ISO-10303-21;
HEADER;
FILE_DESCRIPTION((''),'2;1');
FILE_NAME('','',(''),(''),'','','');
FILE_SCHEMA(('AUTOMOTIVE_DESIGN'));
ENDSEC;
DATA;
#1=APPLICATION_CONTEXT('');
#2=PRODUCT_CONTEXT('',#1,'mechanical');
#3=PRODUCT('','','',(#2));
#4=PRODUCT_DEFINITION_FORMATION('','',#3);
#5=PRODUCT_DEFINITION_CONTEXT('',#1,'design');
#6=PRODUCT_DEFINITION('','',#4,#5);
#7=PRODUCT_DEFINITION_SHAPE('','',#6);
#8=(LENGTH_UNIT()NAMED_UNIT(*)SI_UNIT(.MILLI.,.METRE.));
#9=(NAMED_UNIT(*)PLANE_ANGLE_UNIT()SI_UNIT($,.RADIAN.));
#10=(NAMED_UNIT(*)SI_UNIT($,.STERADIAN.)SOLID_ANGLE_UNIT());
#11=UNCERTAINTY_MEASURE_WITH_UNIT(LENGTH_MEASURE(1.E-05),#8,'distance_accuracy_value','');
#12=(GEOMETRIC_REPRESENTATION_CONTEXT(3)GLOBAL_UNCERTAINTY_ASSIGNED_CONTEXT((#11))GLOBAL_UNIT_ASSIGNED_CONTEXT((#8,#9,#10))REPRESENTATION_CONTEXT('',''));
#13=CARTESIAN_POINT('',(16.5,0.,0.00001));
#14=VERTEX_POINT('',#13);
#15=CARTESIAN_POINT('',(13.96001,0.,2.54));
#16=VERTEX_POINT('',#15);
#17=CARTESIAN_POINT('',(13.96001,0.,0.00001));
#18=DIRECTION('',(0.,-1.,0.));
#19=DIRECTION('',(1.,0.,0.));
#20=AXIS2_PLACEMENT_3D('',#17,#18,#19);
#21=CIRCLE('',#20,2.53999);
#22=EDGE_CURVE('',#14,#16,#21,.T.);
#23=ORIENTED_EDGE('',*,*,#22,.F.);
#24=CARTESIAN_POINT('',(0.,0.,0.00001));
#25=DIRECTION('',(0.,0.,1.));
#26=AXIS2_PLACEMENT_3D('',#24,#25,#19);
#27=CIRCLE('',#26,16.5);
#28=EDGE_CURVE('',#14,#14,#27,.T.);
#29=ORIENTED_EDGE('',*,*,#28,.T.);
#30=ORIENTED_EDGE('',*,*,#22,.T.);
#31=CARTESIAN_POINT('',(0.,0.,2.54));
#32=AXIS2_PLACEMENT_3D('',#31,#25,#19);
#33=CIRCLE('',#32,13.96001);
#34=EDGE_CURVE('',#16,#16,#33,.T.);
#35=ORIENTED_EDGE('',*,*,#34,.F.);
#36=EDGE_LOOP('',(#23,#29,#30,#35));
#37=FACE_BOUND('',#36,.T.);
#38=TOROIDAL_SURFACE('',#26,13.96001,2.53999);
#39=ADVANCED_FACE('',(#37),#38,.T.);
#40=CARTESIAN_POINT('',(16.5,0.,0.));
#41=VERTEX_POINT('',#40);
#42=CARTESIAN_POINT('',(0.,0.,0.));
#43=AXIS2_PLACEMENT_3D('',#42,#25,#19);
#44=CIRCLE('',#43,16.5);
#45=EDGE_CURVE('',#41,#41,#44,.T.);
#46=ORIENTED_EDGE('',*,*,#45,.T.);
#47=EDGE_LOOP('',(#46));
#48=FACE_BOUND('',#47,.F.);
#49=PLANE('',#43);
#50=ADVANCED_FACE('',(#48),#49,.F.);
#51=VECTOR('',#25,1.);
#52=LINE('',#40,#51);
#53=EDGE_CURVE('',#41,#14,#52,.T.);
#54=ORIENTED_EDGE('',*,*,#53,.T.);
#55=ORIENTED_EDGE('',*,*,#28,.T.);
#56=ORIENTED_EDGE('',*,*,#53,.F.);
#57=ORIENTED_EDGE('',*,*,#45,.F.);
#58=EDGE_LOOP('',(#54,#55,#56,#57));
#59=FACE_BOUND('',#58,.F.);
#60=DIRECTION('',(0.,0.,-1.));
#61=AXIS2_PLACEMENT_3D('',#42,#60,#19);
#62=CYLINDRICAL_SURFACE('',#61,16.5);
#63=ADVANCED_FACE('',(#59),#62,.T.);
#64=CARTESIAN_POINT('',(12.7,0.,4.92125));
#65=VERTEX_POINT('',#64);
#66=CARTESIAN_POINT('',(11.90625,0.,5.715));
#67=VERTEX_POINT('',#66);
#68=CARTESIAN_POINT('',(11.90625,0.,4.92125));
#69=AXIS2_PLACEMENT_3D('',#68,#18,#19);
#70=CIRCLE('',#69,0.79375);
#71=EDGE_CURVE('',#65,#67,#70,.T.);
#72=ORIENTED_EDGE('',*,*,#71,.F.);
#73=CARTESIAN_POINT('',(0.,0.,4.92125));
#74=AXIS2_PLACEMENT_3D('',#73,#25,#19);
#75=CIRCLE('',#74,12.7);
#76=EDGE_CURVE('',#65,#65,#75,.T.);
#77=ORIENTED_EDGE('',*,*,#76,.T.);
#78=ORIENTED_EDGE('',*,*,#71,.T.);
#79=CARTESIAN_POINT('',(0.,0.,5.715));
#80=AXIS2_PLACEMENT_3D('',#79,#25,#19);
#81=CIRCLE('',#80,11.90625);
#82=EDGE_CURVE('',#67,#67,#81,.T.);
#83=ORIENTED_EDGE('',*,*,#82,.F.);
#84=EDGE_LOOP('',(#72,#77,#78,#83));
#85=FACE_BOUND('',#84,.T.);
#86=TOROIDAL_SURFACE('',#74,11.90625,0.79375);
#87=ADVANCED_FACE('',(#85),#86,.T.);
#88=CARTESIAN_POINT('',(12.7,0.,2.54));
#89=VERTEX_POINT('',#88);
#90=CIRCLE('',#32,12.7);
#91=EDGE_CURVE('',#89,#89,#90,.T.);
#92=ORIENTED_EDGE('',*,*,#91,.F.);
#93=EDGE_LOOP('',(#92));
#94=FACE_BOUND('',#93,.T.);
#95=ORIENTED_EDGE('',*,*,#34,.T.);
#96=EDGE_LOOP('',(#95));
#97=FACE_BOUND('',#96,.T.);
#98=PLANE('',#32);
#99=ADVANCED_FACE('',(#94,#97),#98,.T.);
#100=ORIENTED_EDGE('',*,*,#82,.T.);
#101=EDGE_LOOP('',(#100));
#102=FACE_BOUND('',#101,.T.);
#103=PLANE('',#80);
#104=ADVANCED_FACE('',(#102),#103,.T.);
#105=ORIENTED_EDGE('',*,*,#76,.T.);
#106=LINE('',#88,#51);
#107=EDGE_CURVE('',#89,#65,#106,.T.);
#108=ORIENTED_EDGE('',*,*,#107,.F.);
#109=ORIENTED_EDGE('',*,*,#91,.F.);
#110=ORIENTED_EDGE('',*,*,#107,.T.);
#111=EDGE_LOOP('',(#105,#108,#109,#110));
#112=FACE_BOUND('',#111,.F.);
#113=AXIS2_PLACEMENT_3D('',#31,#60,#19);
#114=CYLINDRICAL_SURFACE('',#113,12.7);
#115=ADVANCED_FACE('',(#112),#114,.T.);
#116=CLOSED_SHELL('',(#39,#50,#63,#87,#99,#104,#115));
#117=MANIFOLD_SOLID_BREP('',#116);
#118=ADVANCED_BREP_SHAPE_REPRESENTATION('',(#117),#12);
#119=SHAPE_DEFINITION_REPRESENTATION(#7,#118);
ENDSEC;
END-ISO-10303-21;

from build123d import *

# Parameters (mm, degrees)
F0_R     = 16.5
F1_DEPTH = 2.54
F2_R     = 12.7
F3_DEPTH = 3.175
F4_R     = 2.53999
F5_R     = 0.79375


# Not quite as in the source:
# - a fillet or chamfer is up to 0.001 mm smaller than in the source, because OpenCascade refuses the exact size


with BuildPart() as f1:
    # F0 (on Top) → F1 (new body)
    with BuildSketch(Plane.XY):
        Circle(F0_R)
    extrude(amount=F1_DEPTH)

    # F2 (on face) → F3 (join)
    with BuildSketch(Plane.XY.offset(2.54)):
        Circle(F2_R)
    extrude(amount=F3_DEPTH)

    # F4 (radius 2.54 in the source; OpenCascade refuses exactly that, so slightly less here)
    f4_edges = [f1.edges().sort_by_distance(p)[0] for p in [
        (-16.5, 0, 2.54),
    ]]
    fillet(f4_edges, radius=F4_R)

    # F5
    f5_edges = [f1.edges().sort_by_distance(p)[0] for p in [
        (-12.7, 0, 5.715),
    ]]
    fillet(f5_edges, radius=F5_R)


solid = f1.part
